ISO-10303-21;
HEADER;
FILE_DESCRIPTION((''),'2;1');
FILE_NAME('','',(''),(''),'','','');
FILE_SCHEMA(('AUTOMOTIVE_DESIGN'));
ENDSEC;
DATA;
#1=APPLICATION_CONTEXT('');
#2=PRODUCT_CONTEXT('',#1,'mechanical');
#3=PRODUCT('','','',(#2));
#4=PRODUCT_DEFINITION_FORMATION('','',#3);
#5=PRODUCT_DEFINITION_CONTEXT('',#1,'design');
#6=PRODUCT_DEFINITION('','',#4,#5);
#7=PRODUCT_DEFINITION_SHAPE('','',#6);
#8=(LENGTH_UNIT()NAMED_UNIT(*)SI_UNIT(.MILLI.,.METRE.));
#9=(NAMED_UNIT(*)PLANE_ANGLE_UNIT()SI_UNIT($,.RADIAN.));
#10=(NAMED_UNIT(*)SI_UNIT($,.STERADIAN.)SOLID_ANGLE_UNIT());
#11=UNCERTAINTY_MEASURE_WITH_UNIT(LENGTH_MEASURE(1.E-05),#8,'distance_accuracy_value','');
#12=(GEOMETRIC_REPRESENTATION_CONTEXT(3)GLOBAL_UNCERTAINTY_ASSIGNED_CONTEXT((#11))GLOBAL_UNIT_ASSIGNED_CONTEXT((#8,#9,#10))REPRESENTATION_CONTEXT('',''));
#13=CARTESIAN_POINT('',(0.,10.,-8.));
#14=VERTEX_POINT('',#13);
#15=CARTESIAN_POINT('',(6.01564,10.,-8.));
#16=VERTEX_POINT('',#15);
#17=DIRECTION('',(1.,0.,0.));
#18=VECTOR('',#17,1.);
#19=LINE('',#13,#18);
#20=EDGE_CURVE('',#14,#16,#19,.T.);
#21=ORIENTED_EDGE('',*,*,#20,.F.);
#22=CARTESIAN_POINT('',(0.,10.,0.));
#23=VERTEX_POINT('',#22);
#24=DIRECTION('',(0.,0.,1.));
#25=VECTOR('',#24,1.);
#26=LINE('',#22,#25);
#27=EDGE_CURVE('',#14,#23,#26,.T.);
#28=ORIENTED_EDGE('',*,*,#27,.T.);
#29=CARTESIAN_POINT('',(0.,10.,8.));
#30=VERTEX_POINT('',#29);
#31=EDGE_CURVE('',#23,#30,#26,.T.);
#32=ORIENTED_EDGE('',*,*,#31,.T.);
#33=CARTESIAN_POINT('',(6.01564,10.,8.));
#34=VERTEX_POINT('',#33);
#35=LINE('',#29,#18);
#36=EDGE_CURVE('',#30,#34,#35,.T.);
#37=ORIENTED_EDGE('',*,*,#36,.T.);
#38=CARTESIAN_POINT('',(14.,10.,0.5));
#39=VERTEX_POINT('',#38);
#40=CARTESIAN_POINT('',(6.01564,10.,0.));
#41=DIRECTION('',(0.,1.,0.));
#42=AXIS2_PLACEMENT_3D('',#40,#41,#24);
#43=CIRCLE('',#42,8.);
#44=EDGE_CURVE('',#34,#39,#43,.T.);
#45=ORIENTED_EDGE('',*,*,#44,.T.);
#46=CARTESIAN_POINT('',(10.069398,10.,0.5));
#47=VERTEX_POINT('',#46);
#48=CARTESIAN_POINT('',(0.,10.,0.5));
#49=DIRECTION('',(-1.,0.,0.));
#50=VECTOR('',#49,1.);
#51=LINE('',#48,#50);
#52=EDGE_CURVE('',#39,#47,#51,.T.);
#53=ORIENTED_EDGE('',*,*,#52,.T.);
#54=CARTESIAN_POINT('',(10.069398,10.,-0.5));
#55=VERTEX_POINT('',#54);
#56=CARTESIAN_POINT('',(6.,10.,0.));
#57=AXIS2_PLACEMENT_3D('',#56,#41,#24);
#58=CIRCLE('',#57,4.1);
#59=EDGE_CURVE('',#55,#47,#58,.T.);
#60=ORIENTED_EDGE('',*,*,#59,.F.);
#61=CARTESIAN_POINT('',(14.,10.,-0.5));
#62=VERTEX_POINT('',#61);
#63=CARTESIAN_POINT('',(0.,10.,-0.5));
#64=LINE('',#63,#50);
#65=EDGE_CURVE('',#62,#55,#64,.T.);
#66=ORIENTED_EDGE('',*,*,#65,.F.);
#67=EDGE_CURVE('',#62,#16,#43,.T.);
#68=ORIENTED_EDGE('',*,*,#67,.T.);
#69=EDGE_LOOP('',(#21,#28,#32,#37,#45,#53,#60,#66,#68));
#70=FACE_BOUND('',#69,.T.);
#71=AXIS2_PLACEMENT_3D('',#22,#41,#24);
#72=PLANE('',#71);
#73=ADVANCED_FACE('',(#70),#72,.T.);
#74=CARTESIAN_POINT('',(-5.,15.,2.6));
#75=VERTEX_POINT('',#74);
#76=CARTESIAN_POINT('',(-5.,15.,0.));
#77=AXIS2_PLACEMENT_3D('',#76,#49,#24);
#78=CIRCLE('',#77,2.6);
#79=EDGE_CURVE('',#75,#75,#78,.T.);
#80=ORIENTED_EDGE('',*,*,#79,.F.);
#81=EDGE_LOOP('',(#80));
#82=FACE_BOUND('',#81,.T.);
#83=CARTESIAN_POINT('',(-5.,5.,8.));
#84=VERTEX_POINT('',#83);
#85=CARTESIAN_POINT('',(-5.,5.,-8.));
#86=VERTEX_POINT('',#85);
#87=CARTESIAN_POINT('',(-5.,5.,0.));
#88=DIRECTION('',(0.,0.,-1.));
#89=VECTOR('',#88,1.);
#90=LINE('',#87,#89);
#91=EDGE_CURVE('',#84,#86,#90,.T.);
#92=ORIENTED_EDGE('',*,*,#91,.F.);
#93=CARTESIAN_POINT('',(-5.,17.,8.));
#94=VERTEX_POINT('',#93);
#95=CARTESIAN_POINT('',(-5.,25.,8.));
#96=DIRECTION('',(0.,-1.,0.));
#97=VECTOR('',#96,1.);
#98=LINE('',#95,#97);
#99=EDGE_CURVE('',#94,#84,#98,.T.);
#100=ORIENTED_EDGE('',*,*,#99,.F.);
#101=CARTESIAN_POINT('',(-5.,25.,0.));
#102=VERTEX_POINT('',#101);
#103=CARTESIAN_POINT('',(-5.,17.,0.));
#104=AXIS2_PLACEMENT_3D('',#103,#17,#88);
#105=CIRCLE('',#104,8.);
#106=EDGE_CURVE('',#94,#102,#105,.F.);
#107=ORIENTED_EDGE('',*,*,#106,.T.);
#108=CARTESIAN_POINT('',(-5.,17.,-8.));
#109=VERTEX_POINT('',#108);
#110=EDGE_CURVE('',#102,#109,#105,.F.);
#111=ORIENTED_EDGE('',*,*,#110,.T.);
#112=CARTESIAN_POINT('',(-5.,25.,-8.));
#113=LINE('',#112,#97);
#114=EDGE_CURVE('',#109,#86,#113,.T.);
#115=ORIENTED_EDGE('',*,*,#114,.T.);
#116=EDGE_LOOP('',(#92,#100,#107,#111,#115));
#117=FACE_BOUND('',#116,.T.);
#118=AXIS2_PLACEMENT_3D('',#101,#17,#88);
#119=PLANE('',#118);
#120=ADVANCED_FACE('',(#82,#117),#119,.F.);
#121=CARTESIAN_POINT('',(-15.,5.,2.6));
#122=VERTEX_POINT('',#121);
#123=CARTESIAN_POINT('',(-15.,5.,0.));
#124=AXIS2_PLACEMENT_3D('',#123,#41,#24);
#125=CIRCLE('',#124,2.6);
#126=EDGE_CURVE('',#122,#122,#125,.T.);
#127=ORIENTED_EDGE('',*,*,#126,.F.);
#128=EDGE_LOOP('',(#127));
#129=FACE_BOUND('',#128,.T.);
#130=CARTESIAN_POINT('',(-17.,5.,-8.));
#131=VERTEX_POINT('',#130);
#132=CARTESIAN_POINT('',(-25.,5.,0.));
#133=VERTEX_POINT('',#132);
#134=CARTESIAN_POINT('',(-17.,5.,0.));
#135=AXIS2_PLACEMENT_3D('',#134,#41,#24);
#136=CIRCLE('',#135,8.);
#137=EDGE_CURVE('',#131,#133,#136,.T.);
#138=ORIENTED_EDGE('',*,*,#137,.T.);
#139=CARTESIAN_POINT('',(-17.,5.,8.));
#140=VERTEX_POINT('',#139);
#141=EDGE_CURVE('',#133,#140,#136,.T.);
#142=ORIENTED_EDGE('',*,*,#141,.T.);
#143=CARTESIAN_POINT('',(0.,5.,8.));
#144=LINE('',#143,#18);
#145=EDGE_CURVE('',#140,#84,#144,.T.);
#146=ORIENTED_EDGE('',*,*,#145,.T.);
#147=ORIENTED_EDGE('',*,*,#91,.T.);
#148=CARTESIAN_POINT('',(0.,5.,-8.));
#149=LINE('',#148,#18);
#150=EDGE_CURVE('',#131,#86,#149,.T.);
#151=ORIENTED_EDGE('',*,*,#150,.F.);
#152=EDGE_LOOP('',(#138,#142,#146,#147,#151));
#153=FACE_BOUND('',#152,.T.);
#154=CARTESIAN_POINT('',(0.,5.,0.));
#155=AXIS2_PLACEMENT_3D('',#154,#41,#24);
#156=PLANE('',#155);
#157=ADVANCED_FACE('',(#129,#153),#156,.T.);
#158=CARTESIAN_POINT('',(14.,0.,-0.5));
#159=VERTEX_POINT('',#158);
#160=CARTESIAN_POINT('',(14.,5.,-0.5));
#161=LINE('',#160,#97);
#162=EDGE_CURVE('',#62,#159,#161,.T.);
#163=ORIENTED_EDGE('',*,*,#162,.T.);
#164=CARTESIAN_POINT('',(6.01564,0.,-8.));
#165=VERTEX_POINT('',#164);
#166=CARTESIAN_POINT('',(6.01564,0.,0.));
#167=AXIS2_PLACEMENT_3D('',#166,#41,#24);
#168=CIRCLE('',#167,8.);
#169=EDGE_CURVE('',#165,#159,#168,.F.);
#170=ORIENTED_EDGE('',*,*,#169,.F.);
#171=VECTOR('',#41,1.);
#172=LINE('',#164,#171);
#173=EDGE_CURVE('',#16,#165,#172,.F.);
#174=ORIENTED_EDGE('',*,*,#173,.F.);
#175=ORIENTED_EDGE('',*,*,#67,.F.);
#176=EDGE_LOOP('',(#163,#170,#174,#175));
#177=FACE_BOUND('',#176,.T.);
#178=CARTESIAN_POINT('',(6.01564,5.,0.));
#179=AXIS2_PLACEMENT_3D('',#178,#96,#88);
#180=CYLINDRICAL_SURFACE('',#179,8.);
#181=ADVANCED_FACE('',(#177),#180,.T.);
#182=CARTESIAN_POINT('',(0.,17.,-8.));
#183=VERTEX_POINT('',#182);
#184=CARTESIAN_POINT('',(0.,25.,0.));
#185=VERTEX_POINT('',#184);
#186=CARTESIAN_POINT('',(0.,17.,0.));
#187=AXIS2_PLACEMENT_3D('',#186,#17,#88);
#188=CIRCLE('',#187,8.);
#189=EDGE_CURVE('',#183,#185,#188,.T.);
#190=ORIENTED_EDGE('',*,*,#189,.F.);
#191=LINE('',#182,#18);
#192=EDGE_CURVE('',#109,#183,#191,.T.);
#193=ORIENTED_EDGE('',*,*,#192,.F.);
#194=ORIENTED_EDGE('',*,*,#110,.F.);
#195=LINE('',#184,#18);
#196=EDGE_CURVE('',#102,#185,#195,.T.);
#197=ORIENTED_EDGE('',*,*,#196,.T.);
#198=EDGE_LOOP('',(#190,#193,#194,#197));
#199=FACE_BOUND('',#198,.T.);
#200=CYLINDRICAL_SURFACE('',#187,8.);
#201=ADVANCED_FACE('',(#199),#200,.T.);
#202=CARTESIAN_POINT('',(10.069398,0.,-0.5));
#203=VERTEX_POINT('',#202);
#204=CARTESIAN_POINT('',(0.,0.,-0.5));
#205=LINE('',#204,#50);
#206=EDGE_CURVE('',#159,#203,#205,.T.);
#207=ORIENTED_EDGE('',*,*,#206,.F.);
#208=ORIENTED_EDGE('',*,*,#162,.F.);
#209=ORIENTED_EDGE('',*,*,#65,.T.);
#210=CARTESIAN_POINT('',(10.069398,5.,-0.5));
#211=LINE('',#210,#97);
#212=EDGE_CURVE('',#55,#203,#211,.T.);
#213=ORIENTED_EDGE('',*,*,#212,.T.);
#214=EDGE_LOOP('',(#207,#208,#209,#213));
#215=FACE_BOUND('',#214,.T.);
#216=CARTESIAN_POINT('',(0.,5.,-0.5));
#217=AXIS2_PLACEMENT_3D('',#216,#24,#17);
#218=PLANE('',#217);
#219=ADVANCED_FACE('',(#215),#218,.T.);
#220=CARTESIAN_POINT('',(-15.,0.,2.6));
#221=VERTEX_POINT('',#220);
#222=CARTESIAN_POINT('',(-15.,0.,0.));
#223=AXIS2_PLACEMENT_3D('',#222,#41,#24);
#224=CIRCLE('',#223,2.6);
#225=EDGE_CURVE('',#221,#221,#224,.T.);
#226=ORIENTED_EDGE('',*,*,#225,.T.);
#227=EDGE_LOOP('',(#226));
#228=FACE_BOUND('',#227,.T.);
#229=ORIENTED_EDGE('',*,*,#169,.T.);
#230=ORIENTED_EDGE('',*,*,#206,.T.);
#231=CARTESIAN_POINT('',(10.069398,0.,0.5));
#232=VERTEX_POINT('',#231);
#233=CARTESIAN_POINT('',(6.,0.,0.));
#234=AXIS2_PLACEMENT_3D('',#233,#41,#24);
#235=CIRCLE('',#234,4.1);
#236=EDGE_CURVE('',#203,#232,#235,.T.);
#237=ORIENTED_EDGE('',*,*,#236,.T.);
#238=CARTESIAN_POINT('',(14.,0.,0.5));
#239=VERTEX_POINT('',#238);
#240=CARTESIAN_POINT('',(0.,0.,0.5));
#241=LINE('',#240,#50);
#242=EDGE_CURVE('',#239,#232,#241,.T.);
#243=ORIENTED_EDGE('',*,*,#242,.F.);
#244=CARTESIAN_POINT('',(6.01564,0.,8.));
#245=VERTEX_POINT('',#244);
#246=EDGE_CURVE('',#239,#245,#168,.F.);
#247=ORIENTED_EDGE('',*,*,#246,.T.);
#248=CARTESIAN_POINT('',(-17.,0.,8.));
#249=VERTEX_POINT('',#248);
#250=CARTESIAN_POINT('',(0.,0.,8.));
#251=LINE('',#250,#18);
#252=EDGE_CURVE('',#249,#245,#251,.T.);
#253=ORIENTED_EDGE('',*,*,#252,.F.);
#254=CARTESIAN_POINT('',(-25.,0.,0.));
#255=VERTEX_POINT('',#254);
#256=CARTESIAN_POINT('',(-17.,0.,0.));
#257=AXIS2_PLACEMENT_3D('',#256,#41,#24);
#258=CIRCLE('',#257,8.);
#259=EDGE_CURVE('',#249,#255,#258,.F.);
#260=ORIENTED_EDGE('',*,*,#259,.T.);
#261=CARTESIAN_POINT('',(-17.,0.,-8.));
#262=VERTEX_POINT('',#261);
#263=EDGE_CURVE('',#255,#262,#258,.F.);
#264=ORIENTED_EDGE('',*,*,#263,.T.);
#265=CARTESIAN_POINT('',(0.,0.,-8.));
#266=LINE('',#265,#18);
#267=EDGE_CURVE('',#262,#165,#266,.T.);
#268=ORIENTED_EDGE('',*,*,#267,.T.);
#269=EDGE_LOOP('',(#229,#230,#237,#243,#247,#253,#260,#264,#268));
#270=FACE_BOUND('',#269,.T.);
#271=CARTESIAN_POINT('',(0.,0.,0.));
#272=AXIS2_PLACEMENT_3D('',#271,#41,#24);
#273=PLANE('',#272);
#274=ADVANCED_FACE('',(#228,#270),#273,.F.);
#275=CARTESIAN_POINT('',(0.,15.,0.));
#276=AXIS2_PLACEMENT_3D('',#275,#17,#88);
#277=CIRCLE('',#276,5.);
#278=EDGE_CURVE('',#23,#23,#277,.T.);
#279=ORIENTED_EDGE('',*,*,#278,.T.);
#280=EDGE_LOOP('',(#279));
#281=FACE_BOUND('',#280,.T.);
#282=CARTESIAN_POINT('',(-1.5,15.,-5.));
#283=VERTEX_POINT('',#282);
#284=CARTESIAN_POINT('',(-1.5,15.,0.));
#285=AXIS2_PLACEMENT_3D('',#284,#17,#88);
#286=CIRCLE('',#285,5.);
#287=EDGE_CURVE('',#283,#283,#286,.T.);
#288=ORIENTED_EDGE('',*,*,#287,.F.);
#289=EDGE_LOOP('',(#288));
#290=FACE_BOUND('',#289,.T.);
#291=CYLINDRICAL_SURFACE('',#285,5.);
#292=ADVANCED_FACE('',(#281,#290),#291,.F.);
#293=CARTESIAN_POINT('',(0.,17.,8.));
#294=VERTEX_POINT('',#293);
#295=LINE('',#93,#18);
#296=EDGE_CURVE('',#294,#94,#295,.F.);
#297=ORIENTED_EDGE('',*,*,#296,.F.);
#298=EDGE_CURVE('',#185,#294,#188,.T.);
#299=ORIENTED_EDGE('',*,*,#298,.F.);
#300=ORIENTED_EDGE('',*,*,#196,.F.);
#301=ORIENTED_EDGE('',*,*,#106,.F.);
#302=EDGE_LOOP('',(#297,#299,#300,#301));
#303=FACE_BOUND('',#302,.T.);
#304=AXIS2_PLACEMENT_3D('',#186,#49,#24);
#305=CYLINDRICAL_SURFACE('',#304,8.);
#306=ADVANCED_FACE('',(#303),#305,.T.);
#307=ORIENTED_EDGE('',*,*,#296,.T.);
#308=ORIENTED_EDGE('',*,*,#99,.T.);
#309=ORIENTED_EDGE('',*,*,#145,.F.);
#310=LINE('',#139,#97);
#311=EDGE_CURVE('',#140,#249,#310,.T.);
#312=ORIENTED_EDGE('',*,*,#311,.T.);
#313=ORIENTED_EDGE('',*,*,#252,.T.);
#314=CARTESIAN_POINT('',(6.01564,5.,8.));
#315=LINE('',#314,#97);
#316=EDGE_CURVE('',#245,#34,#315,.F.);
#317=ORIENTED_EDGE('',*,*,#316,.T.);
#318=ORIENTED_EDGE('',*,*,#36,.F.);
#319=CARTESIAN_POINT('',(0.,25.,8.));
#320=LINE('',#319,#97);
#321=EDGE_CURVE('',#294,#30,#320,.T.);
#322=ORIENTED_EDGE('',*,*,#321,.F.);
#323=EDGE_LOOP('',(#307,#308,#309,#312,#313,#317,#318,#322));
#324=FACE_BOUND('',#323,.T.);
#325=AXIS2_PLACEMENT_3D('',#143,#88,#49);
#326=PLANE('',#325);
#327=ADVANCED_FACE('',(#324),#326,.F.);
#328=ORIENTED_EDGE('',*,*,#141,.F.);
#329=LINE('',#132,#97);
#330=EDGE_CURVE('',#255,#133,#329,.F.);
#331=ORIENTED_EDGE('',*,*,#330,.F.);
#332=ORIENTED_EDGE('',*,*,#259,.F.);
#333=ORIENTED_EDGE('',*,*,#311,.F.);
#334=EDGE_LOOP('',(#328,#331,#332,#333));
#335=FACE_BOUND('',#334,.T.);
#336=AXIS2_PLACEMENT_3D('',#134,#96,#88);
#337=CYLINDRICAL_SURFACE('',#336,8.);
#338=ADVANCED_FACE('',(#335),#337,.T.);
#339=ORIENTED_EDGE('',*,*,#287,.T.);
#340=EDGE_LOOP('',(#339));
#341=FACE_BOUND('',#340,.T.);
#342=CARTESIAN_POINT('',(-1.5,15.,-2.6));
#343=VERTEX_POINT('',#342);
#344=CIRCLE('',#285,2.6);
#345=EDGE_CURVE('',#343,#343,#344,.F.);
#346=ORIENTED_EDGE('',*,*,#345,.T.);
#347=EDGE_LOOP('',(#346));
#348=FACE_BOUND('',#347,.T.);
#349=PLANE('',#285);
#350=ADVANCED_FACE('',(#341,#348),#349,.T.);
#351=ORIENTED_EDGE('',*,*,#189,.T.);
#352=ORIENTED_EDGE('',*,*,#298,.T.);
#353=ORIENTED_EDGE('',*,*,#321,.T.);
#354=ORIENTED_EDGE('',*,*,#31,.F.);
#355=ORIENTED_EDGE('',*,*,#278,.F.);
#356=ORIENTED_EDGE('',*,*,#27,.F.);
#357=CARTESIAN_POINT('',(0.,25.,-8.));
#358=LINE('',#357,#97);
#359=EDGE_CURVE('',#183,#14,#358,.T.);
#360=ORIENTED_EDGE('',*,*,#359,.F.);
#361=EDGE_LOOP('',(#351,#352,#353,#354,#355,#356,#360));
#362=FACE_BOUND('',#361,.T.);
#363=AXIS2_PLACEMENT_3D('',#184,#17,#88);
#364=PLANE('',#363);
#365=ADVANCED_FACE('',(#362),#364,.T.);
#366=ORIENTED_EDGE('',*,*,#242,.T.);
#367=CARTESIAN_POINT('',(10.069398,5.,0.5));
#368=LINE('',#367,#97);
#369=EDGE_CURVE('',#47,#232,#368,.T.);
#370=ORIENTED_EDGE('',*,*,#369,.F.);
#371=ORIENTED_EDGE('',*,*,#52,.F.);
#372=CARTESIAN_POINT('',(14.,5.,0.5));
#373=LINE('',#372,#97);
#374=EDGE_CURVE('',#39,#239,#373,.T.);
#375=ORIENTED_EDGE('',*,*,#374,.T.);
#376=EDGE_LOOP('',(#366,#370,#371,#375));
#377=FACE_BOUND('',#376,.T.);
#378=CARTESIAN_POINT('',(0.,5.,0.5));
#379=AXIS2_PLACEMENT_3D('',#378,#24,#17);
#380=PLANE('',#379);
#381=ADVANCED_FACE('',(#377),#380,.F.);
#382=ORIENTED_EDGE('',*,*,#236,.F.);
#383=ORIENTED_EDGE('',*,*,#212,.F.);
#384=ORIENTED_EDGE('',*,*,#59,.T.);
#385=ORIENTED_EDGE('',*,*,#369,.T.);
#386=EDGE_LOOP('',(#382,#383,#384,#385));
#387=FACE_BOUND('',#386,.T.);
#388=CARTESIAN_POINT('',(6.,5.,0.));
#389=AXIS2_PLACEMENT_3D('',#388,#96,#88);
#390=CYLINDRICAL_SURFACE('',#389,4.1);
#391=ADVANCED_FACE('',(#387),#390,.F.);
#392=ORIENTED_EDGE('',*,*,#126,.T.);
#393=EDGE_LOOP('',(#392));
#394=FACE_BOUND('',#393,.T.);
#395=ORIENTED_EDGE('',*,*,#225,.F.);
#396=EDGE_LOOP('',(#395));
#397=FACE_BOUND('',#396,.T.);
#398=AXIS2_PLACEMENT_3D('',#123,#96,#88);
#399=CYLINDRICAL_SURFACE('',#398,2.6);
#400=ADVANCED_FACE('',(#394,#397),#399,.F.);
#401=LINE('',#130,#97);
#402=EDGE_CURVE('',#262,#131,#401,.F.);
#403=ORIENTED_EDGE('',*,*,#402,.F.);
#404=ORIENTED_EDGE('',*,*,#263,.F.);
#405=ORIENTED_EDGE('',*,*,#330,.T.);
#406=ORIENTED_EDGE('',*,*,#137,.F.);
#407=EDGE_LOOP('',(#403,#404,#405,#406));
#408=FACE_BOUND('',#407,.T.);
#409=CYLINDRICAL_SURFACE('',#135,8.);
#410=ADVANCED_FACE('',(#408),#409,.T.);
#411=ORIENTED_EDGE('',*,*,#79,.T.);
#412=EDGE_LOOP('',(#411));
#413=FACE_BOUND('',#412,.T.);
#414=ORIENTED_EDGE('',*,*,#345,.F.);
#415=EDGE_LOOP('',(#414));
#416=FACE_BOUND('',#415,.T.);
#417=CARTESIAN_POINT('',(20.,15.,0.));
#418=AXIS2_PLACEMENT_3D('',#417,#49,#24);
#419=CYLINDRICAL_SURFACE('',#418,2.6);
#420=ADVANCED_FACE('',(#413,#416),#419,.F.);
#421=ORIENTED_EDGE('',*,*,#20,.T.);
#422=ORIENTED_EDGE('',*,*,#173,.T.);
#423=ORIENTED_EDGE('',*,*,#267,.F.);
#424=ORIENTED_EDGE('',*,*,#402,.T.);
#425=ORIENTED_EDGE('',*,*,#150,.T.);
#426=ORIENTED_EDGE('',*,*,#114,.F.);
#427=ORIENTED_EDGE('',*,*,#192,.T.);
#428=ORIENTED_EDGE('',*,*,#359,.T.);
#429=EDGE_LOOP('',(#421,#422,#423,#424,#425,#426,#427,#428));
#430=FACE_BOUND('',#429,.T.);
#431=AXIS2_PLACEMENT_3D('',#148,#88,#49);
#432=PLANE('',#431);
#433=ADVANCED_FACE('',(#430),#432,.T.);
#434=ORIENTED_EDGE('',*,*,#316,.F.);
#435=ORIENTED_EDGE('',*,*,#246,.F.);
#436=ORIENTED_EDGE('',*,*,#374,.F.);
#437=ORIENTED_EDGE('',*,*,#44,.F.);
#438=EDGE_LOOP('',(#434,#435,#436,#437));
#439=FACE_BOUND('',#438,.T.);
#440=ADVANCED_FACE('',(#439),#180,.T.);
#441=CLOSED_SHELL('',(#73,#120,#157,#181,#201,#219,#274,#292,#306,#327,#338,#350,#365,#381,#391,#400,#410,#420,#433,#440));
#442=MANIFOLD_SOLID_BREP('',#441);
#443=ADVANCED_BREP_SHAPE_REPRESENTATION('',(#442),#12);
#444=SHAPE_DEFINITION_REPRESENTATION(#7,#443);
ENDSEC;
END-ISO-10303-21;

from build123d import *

# Parameters (mm, degrees)
SKETCH1_R           = 2.6
BOSS_EXTRUDE2_DEPTH = 5
BOSS_EXTRUDE3_DEPTH = 10
SKETCH1_5_W         = 5
SKETCH1_5_H         = 16
BOSS_EXTRUDE4_DEPTH = 25
FILLET1_R           = 8
FILLET2_R           = 8
FILLET3_R           = 8
FILLET4_R           = 8
FILLET5_R           = 8
FILLET6_R           = 8
SKETCH3_R           = 2.6
CUT_EXTRUDE1_DEPTH  = 25
SKETCH4_R           = 5
CUT_EXTRUDE2_DEPTH  = 1.5


# Some blends are built 0.0001 mm under size
with BuildPart() as part:
    # Sketch1 → Boss-Extrude2 (new body)
    with BuildSketch(Plane(origin=(0, 0, 0), x_dir=(1, 0, 0), z_dir=(0, 1, 0))):
        with BuildLine():
            Line((-25, 8), (-25, -8))
            Line((-25, -8), (14, -8))
            Line((14, -8), (14, -0.5))
            Line((14, -0.5), (10.06939799, -0.5))
            ThreePointArc((10.06939799, -0.5), (1.9, 0), (10.06939799, 0.5))
            Line((10.06939799, 0.5), (14, 0.5))
            Line((14, 0.5), (14, 8))
            Line((14, 8), (-25, 8))
        make_face()
        with Locations(Location((-15, 0, 0), (0, 0, 270))):
            Circle(SKETCH1_R, mode=Mode.SUBTRACT)
    extrude(amount=BOSS_EXTRUDE2_DEPTH)

    # Sketch1<4> → Boss-Extrude3 (add)
    with BuildSketch(Plane(origin=(0, 0, 0), x_dir=(1, 0, 0), z_dir=(0, 1, 0))):
        with BuildLine():
            Line((14, 8), (0, 8))
            Line((0, 8), (0, -8))
            Line((0, -8), (14, -8))
            Line((14, -8), (14, -0.5))
            Line((14, -0.5), (10.06939799, -0.5))
            ThreePointArc((10.06939799, -0.5), (1.9, 0), (10.06939799, 0.5))
            Line((10.06939799, 0.5), (14, 0.5))
            Line((14, 0.5), (14, 8))
        make_face()
    extrude(amount=BOSS_EXTRUDE3_DEPTH)

    # Sketch1<5> → Boss-Extrude4 (add)
    with BuildSketch(Plane(origin=(0, 0, 0), x_dir=(1, 0, 0), z_dir=(0, 1, 0))):
        with Locations((-2.5, 0)):
            Rectangle(SKETCH1_5_W, SKETCH1_5_H)
    extrude(amount=BOSS_EXTRUDE4_DEPTH)

    # Fillet1
    # the kernel refuses this fillet: 8 mm, written as the material it takes off along each edge
    with BuildSketch(Plane(origin=(14, 29.960899278, 8), x_dir=(0, 0, -1), z_dir=(0, -1, 0))) as fillet1_piece_1:
        with BuildLine():
            CenterArc((8, -7.984359711), FILLET1_R, 93.583321698, 86.416678302)
            Line((0, -7.984359711), (-0.16, -7.984359711))
            Line((-0.16, -7.984359711), (-0.16, 0))
            Line((-0.16, 0), (0, 0.16))
            ThreePointArc((0, 0.16), (3.75, 0.16), (7.49, 0.159687194))
            Line((7.49, 0.159687194), (7.5, 0))
        make_face()
    extrude(amount=49.921798557, mode=Mode.SUBTRACT)

    # Fillet2
    # the kernel refuses this fillet: 8 mm, written as the material it takes off along each edge
    with BuildSketch(Plane(origin=(14, -19.960899278, -8), x_dir=(0, 0, 1), z_dir=(0, 1, 0))) as fillet2_piece_1:
        with BuildLine():
            CenterArc((8, -7.984359711), FILLET2_R, 93.583321698, 86.416678302)
            Line((0, -7.984359711), (-0.16, -7.984359711))
            Line((-0.16, -7.984359711), (-0.16, 0))
            Line((-0.16, 0), (0, 0.16))
            ThreePointArc((0, 0.16), (3.75, 0.16), (7.49, 0.159687194))
            Line((7.49, 0.159687194), (7.5, 0))
        make_face()
    extrude(amount=49.921798557, mode=Mode.SUBTRACT)

    # Fillet3
    fillet3_edges = [part.edges().sort_by_distance(p)[0] for p in [
        (-25, 2.5, 8),
    ]]
    fillet(fillet3_edges, radius=FILLET3_R)

    # Fillet4
    fillet4_edges = [part.edges().sort_by_distance(p)[0] for p in [
        (-25, 2.5, -8),
    ]]
    fillet(fillet4_edges, radius=FILLET4_R - 0.0001)  # a hair under: the kernel refuses the full size

    # Fillet5
    fillet5_edges = [part.edges().sort_by_distance(p)[0] for p in [
        (-2.5, 25, 8),
    ]]
    fillet(fillet5_edges, radius=FILLET5_R)

    # Fillet6
    fillet6_edges = [part.edges().sort_by_distance(p)[0] for p in [
        (-2.5, 25, -8),
    ]]
    fillet(fillet6_edges, radius=FILLET6_R - 0.0001)  # a hair under: the kernel refuses the full size

    # Sketch3 → Cut-Extrude1 (cut)
    with BuildSketch(Plane.ZY.offset(5)):
        with Locations((0, 15)):
            Circle(SKETCH3_R)
    extrude(amount=-CUT_EXTRUDE1_DEPTH, mode=Mode.SUBTRACT)

    # Sketch4 → Cut-Extrude2 (cut)
    with BuildSketch(Plane(origin=(0, 0, 0), x_dir=(0, 0, -1), z_dir=(1, 0, 0))):
        with Locations((0, 15)):
            Circle(SKETCH4_R)
    extrude(amount=-CUT_EXTRUDE2_DEPTH, mode=Mode.SUBTRACT)


solid = part.part
